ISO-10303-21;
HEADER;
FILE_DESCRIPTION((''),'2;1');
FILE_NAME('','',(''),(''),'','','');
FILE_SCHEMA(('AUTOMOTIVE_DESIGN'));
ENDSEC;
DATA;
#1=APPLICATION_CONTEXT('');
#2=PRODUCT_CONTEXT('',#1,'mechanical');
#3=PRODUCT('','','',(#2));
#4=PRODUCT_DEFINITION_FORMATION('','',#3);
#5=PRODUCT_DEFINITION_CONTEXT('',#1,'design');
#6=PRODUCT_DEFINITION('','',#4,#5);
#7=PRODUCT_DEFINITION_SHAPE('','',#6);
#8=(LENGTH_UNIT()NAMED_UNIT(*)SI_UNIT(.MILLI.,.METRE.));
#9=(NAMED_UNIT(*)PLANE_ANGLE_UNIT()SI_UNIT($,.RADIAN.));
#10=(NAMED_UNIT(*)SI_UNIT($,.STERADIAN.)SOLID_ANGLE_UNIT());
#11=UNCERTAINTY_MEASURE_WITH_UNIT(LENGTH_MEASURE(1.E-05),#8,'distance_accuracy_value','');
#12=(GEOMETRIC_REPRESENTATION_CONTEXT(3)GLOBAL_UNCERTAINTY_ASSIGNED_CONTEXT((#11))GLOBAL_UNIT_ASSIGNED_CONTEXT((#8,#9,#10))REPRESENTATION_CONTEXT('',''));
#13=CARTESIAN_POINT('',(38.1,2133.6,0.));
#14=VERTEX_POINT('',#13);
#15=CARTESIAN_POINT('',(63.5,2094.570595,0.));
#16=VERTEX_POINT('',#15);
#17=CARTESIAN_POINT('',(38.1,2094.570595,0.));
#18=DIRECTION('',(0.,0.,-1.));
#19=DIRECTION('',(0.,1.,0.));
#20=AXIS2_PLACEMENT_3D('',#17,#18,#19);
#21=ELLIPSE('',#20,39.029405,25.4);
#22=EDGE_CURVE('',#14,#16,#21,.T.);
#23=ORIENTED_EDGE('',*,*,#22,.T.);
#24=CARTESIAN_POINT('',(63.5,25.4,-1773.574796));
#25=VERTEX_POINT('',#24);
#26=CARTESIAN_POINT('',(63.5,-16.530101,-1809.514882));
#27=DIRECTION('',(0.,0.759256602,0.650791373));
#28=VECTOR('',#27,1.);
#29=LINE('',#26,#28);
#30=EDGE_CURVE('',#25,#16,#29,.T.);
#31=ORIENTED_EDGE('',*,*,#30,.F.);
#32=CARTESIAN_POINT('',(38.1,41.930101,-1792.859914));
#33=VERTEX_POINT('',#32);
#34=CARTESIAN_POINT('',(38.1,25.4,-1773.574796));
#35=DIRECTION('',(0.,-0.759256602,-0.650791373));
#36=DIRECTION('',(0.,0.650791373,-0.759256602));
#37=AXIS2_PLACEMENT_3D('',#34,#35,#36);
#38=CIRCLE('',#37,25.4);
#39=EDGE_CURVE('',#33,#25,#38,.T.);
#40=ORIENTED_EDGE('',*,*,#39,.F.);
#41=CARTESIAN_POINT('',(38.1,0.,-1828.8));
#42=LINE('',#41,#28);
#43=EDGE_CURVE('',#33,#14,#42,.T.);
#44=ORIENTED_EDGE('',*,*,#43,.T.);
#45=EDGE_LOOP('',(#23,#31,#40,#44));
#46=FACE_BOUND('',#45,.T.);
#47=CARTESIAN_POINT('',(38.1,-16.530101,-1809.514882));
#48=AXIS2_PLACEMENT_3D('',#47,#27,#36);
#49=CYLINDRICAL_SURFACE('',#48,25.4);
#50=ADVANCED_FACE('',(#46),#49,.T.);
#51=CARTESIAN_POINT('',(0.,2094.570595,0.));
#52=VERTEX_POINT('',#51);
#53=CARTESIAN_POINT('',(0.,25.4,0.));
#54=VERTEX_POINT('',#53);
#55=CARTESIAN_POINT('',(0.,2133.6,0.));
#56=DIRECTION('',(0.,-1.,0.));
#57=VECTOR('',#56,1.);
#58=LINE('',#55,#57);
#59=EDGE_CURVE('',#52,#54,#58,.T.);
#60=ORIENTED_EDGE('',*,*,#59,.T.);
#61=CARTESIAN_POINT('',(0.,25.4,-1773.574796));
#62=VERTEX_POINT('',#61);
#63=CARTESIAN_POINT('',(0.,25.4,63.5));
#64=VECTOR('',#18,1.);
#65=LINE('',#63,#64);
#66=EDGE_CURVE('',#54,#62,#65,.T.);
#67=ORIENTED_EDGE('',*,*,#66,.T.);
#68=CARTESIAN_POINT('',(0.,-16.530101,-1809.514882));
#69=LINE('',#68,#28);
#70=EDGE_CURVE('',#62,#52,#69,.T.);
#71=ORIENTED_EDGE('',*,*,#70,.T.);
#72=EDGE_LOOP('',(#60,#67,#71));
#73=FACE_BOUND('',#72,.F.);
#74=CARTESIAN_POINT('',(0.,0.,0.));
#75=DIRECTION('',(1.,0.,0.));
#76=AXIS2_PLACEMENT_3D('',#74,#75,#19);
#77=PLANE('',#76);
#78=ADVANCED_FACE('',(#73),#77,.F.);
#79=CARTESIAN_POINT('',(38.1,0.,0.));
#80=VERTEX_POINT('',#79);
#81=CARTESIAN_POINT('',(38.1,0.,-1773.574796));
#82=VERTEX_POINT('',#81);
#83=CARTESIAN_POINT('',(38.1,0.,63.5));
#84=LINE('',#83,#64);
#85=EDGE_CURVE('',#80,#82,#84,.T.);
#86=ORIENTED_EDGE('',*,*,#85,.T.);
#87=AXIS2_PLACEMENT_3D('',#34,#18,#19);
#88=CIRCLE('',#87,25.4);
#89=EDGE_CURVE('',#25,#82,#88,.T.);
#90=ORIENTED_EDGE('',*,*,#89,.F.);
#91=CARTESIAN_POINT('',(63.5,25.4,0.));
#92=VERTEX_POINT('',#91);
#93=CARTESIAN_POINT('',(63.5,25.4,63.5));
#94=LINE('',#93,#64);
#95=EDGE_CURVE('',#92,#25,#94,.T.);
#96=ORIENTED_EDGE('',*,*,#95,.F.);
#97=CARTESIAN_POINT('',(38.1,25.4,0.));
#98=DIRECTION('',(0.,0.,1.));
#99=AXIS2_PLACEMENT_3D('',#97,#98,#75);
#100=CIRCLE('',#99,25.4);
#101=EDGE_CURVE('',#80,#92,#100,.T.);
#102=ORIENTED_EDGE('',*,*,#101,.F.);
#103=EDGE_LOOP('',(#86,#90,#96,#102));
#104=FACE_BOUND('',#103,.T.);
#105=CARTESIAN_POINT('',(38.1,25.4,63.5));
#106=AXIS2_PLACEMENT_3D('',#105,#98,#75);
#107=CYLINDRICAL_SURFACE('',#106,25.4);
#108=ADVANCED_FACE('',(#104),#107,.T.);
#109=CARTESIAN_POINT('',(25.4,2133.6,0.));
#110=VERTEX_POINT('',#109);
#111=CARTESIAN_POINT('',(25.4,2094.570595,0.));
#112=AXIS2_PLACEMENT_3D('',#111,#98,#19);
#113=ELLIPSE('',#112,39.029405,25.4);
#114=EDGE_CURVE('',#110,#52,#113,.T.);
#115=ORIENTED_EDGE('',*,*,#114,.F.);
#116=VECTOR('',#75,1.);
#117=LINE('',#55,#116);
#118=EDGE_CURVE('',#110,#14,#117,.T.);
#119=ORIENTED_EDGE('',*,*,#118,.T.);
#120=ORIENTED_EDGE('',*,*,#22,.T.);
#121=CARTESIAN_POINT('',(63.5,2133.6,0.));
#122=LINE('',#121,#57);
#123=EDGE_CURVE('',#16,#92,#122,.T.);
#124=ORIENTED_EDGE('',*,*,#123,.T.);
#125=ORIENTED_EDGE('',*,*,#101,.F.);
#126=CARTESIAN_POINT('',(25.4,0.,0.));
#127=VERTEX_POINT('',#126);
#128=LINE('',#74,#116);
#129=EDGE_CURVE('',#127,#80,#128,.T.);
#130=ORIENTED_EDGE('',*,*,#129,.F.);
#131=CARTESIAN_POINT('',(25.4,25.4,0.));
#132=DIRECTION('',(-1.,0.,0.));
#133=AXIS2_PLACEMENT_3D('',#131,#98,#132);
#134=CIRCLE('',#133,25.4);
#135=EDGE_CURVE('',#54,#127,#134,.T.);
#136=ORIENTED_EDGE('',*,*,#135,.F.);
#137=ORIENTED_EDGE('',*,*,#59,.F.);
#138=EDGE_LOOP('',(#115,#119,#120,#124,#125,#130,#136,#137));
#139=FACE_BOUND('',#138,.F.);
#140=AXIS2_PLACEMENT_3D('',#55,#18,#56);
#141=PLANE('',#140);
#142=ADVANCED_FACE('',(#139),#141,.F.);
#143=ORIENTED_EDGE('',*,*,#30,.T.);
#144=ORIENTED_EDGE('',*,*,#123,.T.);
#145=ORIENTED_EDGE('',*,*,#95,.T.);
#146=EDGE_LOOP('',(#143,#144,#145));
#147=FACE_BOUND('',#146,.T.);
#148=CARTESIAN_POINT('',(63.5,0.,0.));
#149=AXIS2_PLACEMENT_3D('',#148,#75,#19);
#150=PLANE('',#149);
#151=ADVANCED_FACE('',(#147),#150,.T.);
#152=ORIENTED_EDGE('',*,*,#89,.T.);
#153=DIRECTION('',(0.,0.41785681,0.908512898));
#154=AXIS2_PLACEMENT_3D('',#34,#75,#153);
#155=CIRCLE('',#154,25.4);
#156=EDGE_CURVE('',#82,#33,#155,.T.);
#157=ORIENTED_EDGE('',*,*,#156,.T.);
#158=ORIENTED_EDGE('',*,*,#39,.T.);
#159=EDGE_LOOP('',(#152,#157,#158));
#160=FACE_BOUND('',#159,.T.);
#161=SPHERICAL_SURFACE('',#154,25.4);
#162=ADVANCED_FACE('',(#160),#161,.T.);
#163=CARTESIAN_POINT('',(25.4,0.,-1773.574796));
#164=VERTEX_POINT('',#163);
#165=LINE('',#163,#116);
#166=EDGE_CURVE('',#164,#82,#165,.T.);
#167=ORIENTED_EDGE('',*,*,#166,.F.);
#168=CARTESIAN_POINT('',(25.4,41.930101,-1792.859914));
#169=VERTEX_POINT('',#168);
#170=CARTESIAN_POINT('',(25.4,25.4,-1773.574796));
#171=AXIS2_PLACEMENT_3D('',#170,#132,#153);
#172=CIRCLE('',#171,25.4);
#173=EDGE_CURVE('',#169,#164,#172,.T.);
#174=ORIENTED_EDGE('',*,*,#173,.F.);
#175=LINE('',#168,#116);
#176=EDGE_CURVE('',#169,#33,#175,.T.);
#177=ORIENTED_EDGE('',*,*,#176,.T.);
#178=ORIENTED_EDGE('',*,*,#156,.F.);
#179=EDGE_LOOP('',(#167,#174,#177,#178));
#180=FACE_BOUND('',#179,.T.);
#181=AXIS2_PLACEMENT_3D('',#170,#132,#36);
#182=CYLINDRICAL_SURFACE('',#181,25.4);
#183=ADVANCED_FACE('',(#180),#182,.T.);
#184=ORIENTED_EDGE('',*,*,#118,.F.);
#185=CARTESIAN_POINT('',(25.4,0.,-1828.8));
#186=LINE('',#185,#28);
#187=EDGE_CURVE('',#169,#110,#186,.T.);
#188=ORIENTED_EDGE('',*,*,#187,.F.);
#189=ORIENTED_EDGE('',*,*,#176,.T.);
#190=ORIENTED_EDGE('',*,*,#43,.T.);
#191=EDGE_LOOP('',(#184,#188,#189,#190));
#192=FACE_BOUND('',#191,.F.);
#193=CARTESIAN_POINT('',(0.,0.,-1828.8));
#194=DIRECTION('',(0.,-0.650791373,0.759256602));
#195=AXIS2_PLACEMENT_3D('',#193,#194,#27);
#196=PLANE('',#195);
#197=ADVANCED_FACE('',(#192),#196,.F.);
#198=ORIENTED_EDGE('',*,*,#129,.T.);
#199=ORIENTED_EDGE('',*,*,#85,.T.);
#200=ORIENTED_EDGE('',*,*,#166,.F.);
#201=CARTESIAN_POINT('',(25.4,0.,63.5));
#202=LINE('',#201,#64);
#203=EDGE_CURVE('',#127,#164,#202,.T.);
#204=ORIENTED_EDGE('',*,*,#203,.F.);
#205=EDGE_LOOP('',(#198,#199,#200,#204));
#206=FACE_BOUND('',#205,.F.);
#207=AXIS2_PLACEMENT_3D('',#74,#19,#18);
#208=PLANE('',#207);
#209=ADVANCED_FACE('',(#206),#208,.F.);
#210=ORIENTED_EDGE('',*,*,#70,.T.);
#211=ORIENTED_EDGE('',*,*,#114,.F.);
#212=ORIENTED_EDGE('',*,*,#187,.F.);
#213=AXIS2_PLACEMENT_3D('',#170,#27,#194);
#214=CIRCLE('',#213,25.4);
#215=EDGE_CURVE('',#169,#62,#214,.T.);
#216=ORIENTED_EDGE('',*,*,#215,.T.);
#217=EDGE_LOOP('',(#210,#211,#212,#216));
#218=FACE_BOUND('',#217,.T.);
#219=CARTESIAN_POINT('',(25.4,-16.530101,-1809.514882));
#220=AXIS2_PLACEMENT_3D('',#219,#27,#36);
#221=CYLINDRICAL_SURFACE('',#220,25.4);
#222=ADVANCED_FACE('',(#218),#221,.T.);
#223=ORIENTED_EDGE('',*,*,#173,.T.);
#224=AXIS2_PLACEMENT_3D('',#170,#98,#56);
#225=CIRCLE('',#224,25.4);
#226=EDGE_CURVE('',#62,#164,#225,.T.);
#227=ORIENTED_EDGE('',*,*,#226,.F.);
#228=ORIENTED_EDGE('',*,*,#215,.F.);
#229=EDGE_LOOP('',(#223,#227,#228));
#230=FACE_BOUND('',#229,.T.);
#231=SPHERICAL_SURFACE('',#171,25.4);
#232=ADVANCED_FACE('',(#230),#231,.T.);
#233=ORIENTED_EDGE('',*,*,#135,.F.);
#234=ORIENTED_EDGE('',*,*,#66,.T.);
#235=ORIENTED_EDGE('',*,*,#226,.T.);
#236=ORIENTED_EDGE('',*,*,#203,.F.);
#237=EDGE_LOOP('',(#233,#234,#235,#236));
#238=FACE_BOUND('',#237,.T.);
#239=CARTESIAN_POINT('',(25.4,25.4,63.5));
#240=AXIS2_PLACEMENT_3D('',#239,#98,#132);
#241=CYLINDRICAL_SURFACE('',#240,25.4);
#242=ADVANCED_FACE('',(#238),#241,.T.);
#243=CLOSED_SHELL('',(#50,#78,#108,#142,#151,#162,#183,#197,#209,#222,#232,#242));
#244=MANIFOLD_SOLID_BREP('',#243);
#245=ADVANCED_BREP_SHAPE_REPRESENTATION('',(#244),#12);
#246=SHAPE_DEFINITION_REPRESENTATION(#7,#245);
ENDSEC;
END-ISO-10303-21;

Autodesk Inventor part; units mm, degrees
ref_plane "XZ Plane" through (0, 0, 0) normal (0, 1, 0) x (-1, 0, 0)
ref_plane "XY Plane" through (0, 0, 0) normal (0, 0, 1) x (1, 0, 0)
sketch "Sketch1" plane through (0, 0, 0) normal (1, 0, 0) x (0, 1, 0)
  line L0 (0, 0) -> (0, -1828.8)
  line L1 (0, -1828.8) -> (2133.6, 0)
  line L2 (2133.6, 0) -> (0, 0)
  dimension "d2" = 1828.8
  dimension "d3" = 2133.6
extrude "Extrusion1" add sketch "Sketch1" along normal blind 63.5
ref_plane "Work Plane1" through (31.75, 0, 0) normal (1, 0, 0) x (0, 1, 0)
fillet "Fillet4" radius 25.4 1 edges at (63.5, 1066.8, -914.4)
fillet "Fillet5" radius 25.4 1 edges at (0, 1066.8, -914.4)
fillet "Fillet6" radius 25.4 5 edges at (56.0605, 0, -1819.0016) (31.75, 0, -1828.8) (7.4395, 0, -1819.0016) (0, 0, -897.6731) (63.5, 0, -897.6731)
properties part number "RedSail-ver1-1111-2021"
